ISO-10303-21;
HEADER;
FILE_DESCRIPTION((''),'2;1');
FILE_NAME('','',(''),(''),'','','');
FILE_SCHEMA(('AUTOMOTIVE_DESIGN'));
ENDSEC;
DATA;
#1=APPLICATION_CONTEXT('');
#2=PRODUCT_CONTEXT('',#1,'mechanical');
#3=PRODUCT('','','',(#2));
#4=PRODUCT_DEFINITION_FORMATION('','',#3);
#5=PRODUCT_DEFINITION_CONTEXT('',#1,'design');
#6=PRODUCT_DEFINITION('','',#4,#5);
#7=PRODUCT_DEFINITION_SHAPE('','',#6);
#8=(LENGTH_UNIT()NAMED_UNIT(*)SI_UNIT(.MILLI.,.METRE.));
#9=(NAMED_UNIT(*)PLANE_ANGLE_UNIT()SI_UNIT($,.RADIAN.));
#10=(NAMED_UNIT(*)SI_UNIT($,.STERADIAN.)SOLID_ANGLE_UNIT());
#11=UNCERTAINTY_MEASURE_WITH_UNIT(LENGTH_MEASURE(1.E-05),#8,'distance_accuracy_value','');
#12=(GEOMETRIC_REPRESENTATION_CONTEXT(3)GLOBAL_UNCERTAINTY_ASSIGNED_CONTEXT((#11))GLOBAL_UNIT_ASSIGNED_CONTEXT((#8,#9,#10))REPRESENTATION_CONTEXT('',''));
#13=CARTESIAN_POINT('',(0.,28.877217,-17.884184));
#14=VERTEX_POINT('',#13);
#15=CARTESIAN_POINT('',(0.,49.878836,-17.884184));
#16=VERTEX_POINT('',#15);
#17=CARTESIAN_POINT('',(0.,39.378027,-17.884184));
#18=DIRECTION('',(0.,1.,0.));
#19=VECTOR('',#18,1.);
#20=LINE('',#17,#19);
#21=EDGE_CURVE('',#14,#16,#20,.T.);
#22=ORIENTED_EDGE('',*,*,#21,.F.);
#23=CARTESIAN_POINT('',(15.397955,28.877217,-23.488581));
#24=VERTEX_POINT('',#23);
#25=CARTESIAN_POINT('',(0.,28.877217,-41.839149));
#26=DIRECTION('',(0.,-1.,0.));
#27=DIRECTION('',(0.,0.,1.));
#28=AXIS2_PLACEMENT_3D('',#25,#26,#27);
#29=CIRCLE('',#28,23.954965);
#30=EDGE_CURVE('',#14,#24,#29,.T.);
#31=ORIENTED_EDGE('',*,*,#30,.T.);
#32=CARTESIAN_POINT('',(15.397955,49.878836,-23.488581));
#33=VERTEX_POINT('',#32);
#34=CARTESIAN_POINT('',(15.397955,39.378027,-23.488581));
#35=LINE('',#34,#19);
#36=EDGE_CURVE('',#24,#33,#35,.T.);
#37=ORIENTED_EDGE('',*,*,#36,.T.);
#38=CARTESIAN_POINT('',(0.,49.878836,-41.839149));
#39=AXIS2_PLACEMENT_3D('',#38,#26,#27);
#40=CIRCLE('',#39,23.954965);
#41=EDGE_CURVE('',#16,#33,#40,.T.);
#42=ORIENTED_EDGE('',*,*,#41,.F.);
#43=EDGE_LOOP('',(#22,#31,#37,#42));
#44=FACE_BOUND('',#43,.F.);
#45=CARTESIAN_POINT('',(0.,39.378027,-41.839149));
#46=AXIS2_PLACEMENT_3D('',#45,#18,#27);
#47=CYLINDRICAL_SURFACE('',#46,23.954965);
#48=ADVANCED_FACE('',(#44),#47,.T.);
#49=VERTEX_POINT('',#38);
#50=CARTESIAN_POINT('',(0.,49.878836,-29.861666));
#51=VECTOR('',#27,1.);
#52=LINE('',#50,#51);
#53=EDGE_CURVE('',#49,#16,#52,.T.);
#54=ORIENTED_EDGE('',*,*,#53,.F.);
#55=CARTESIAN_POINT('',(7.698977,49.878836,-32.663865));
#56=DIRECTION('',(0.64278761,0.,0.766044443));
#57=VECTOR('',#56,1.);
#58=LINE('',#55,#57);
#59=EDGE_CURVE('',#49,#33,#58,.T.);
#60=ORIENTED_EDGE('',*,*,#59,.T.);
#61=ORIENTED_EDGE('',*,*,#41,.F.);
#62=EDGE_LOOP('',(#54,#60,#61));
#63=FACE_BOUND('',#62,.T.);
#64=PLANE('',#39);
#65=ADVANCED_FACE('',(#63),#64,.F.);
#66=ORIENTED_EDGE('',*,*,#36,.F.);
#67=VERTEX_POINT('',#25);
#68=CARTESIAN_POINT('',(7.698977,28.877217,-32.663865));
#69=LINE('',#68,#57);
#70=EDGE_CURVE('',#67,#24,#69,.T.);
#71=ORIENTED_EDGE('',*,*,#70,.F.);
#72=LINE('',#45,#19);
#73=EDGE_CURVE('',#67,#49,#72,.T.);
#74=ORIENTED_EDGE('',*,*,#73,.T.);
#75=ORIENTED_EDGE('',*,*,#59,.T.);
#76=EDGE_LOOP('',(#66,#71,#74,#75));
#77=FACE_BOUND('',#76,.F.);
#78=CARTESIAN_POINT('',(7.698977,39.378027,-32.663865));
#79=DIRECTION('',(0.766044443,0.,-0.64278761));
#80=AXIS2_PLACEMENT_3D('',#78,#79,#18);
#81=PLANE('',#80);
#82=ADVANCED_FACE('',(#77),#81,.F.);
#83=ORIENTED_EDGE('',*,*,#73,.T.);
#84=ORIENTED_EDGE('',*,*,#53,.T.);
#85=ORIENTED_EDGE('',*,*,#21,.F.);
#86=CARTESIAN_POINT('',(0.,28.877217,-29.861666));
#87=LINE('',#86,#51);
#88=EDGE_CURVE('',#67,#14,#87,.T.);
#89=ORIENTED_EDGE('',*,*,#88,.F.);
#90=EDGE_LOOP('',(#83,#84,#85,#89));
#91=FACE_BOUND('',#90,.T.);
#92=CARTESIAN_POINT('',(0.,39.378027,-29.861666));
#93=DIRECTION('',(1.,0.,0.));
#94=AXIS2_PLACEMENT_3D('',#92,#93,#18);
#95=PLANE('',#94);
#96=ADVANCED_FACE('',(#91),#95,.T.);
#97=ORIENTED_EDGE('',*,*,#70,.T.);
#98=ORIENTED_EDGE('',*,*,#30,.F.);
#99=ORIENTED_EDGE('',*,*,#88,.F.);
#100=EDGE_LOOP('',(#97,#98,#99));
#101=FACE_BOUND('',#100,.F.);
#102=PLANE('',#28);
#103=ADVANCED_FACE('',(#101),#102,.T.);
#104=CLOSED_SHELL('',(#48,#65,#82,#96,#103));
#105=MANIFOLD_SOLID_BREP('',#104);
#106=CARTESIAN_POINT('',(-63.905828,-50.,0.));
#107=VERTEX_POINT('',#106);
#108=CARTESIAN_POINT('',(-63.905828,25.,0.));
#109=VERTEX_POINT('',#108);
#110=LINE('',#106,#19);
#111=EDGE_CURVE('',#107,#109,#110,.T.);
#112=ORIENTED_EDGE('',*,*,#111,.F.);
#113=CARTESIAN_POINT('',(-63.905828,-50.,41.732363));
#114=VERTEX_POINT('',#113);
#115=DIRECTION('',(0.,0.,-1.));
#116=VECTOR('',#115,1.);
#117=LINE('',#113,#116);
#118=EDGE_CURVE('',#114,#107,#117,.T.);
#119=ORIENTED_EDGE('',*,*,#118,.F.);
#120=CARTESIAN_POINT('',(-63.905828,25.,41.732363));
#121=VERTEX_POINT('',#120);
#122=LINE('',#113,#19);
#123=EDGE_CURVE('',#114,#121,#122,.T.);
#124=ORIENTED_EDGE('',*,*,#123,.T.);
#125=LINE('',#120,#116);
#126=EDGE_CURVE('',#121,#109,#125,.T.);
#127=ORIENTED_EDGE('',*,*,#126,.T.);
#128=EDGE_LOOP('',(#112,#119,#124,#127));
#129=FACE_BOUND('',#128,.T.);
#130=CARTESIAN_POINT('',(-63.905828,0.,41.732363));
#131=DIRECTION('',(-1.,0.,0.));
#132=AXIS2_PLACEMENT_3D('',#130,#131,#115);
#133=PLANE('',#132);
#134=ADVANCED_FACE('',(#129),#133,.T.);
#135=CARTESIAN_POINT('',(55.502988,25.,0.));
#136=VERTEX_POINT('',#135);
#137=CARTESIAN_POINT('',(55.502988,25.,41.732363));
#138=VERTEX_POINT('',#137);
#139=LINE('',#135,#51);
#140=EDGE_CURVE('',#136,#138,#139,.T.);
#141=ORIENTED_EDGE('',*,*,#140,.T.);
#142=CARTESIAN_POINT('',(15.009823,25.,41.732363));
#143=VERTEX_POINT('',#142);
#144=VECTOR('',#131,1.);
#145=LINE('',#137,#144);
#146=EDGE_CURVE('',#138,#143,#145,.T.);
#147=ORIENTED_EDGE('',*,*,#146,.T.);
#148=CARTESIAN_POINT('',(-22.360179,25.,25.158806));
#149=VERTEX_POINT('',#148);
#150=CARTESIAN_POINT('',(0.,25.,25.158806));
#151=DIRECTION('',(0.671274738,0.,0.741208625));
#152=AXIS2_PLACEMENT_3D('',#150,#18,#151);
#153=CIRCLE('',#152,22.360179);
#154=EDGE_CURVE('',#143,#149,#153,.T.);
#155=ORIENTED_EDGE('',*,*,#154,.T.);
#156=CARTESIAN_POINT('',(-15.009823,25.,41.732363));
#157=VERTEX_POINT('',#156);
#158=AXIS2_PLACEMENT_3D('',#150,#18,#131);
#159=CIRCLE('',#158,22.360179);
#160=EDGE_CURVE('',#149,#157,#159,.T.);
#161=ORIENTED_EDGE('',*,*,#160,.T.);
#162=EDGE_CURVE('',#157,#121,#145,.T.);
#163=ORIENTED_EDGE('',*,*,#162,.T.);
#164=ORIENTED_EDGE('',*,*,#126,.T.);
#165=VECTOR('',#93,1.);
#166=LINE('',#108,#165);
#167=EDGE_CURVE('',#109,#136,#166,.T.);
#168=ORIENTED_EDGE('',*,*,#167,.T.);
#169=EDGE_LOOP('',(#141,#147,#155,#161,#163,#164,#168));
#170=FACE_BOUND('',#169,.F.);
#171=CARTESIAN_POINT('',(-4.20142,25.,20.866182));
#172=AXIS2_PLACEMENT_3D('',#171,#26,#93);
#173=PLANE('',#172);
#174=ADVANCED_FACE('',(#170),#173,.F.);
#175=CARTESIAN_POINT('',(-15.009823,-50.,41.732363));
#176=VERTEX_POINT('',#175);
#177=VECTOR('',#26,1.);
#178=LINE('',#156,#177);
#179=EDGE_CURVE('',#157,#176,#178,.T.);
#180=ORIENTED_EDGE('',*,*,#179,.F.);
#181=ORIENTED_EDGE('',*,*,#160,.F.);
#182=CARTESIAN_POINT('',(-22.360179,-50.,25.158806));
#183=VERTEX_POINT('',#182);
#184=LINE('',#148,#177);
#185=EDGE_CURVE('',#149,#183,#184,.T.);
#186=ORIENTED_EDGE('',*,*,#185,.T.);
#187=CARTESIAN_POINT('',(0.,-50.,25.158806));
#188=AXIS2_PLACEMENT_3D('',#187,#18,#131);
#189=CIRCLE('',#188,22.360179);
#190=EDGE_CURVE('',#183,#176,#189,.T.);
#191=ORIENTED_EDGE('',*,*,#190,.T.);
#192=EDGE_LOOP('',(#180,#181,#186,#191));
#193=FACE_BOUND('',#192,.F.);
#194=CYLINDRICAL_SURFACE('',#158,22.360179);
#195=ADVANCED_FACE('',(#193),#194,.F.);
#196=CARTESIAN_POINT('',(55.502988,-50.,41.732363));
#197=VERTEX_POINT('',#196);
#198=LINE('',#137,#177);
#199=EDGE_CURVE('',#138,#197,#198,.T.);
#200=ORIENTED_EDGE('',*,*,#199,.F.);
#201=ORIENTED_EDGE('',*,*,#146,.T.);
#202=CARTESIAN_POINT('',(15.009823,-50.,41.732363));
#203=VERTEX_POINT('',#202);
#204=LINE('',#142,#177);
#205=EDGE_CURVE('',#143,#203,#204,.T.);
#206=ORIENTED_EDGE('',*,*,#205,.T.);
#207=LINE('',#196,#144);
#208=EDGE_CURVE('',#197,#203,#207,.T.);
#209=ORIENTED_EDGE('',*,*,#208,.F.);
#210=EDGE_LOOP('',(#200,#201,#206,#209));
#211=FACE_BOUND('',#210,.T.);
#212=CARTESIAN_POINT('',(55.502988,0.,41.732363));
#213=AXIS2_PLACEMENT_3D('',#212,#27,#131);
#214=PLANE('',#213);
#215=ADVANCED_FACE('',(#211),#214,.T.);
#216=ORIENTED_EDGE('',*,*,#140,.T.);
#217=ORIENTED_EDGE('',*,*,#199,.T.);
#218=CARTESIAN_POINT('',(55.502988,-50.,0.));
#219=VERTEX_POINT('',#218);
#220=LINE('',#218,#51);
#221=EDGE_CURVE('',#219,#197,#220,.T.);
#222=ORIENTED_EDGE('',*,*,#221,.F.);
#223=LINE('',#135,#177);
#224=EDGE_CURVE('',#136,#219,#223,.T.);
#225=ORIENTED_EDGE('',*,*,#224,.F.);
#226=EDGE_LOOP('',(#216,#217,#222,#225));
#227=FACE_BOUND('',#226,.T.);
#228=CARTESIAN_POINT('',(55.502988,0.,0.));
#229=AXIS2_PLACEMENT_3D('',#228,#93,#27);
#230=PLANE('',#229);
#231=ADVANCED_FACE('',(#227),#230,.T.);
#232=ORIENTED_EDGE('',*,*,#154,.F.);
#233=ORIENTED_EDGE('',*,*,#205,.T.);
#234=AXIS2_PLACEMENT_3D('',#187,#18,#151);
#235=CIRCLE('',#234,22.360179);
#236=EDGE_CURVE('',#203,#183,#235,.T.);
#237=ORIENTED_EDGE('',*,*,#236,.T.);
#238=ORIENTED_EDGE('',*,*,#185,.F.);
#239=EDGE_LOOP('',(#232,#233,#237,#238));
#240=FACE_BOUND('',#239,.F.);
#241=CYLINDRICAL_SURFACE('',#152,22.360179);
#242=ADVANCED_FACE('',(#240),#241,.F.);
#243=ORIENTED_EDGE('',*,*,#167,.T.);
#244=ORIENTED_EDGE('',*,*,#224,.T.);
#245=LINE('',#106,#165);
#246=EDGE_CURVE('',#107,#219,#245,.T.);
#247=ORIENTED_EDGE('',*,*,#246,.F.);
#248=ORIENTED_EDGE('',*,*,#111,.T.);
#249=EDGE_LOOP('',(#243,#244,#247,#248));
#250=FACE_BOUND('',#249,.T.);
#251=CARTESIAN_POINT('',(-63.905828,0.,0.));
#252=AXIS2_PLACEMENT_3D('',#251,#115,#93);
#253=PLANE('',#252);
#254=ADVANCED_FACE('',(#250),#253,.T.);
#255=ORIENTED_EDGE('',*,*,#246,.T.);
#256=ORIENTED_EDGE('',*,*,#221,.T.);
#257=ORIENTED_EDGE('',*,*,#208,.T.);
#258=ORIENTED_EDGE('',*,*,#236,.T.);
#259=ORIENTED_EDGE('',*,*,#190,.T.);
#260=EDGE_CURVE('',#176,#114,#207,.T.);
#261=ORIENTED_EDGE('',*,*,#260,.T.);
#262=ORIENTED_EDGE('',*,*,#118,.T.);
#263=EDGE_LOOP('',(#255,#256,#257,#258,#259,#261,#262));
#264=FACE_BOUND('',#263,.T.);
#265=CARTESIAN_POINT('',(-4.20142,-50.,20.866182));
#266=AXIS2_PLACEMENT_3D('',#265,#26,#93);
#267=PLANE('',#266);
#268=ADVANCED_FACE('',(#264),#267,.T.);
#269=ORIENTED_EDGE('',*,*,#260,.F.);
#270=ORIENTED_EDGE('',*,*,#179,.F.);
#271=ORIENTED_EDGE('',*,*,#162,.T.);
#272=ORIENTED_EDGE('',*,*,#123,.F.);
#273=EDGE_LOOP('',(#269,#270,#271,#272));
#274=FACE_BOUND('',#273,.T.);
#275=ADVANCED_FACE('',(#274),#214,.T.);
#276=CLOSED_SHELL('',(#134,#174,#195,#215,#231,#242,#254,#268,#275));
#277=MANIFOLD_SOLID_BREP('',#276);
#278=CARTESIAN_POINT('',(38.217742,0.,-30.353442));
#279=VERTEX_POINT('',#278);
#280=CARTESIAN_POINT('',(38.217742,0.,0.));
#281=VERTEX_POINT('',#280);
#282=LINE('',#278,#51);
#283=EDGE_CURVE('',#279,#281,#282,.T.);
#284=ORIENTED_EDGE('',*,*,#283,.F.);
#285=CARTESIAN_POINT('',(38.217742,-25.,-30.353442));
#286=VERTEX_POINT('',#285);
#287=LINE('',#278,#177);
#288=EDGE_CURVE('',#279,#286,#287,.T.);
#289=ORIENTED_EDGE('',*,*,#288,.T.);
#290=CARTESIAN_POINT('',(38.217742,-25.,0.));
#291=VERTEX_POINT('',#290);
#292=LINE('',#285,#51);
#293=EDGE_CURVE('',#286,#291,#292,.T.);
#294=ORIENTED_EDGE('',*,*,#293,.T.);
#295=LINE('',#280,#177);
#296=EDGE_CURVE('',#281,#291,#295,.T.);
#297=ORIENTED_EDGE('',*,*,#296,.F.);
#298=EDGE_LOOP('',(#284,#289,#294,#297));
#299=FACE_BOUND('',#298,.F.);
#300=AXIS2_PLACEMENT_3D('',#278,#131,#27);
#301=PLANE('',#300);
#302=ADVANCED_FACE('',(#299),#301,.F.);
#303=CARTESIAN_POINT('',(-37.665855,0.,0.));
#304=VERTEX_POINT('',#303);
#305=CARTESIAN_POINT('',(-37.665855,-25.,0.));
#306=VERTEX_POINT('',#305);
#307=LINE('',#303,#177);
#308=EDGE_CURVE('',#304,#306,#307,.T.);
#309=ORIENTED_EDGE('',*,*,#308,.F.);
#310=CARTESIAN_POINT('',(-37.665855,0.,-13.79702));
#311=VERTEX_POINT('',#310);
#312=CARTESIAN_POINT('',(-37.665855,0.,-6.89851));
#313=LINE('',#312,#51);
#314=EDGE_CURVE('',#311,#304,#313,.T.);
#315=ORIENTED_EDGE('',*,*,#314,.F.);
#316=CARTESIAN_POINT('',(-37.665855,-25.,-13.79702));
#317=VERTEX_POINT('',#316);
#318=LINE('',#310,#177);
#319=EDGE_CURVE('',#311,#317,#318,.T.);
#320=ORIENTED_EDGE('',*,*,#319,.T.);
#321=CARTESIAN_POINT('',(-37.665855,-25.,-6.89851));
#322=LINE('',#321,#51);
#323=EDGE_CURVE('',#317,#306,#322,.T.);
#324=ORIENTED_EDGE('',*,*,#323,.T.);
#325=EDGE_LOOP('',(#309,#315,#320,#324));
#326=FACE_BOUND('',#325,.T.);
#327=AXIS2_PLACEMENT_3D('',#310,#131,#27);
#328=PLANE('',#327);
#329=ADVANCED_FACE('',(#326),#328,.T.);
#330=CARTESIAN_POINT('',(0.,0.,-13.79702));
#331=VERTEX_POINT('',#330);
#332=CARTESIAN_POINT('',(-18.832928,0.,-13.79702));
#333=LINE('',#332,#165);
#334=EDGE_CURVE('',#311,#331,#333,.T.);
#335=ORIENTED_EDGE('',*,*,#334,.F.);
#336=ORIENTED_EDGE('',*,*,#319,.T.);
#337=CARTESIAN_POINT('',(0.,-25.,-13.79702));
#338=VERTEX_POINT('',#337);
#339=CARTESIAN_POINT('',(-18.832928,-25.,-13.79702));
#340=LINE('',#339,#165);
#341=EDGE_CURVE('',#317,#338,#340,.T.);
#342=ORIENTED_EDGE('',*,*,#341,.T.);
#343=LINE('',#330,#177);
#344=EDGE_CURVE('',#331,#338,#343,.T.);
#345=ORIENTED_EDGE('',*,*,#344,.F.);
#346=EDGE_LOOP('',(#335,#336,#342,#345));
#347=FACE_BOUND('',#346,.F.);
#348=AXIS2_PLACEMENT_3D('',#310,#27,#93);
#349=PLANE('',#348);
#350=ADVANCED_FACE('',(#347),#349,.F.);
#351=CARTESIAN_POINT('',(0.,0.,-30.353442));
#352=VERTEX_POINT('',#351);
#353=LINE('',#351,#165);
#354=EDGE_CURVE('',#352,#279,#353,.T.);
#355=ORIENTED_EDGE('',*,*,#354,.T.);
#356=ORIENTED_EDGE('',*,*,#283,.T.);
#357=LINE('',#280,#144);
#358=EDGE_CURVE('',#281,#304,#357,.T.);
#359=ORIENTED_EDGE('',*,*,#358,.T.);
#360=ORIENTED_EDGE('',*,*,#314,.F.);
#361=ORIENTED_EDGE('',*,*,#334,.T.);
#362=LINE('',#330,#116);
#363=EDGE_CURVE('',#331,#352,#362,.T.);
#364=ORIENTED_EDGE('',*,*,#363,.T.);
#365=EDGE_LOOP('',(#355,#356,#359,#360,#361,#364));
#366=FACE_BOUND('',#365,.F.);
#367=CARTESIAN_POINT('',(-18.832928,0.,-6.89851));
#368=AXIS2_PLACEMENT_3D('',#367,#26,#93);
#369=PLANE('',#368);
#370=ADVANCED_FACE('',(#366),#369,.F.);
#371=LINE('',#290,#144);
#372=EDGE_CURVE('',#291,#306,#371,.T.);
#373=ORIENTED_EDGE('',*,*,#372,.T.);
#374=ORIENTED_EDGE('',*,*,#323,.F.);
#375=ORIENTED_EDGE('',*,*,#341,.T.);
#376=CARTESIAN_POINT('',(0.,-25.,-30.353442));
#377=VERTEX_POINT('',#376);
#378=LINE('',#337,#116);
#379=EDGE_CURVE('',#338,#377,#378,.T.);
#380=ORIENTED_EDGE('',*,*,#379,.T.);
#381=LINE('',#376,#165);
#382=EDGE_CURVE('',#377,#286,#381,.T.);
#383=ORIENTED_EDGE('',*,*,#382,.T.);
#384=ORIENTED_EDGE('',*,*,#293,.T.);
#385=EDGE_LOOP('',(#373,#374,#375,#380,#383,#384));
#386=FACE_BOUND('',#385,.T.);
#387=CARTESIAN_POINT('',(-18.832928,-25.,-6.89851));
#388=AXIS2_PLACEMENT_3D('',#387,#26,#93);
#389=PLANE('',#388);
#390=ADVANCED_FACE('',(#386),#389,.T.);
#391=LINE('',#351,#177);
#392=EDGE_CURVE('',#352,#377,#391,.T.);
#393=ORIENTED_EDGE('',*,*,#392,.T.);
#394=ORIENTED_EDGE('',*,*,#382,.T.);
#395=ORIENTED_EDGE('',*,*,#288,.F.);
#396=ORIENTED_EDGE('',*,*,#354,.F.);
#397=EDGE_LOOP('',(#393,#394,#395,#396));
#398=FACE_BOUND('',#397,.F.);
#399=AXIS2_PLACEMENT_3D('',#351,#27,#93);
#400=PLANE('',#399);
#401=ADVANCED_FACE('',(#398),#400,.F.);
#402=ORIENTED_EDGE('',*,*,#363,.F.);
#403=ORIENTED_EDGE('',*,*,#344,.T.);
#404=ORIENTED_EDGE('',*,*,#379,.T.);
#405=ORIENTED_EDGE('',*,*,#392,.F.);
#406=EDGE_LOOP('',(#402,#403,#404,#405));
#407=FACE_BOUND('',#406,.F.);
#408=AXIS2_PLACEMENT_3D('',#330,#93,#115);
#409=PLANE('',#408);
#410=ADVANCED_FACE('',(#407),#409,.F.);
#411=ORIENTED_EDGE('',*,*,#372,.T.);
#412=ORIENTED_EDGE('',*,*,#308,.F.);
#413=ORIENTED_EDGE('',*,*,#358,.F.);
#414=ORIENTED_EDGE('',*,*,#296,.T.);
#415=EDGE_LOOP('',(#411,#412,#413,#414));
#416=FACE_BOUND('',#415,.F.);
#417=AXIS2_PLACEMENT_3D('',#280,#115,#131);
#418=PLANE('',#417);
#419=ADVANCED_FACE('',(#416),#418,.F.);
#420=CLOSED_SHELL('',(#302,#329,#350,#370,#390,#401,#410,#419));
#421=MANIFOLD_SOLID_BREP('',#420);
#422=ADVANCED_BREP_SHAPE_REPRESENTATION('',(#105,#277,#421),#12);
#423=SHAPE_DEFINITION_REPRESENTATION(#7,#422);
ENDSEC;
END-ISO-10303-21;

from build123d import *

# Parameters (mm, degrees)
F2_DEPTH = 25
F1_W     = 37.6658551395
F1_H     = 13.7970196083
F3_DEPTH = 25
F4_DEPTH = 25
F6_DEPTH = 300
F7_W     = 21.0016183555
F7_H     = 23.9549651742
F8_ANGLE = 320


with BuildPart() as f2:
    # F0 (on Front) → F2 (new body)
    with BuildSketch(Plane.XZ):
        Polygon((-63.9058277011, 0), (0, 0), (55.5029883981, 0), (55.5029883981, 41.7323634028), (-63.9058277011, 41.7323634028), align=None)
    extrude(amount=F2_DEPTH)

    # F3 (add): a face of the model
    f3_faces = [f2.faces().sort_by_distance(p)[0] for p in [
        (-4.2014196515, -25, 20.8661817014),
    ]]
    extrude(f3_faces, amount=F3_DEPTH)

    # F4 (add): a face of the model
    f4_faces = [f2.faces().sort_by_distance(p)[0] for p in [
        (-4.2014196515, 0, 20.8661817014),
    ]]
    extrude(f4_faces, amount=F4_DEPTH)

    # F5 (on face) → F6 (cut)
    with BuildSketch(Plane(origin=(0, 25, 0), x_dir=(-1, 0, 0), z_dir=(0, 1, 0))):
        with BuildLine():
            Line((-15.0098233938, 41.7323634028), (15.0098233938, 41.7323634028))
            ThreePointArc((15.0098233938, 41.7323634028), (0, 47.5189849051), (-15.0098233938, 41.7323634028))
        make_face()
        with BuildLine():
            ThreePointArc((-15.0098233938, 41.7323634028), (-9.0651881117, 4.7186498209), (22.3601791324, 25.1588057727))
            ThreePointArc((22.3601791324, 25.1588057727), (20.4401559518, 34.2239938844), (15.0098233938, 41.7323634028))
            Line((15.0098233938, 41.7323634028), (-15.0098233938, 41.7323634028))
        make_face()
    extrude(amount=-F6_DEPTH, mode=Mode.SUBTRACT)


with BuildPart() as f2b:
    # F1 (on Front) → F2, piece 2 (new body)
    with BuildSketch(Plane.XZ):
        with Locations((-18.8329275697, -6.8985098042)):
            Rectangle(F1_W, F1_H)
        Polygon((38.217741996, 0), (0, 0), (0, -13.7970196083), (0, -30.3534418344), (38.217741996, -30.3534418344), align=None)
    extrude(amount=F2_DEPTH)


with BuildPart() as f8:
    # F7 (on Right) → F8 (revolve)
    with BuildSketch(Plane.YZ):
        with Locations((39.3780265003, -29.8616662621)):
            Rectangle(F7_W, F7_H)
    revolve(axis=Axis((0, 39.3780265003, -41.8391488492), (0, -1, 0)), revolution_arc=F8_ANGLE)


solid = Compound([f2.part, f2b.part, f8.part])
